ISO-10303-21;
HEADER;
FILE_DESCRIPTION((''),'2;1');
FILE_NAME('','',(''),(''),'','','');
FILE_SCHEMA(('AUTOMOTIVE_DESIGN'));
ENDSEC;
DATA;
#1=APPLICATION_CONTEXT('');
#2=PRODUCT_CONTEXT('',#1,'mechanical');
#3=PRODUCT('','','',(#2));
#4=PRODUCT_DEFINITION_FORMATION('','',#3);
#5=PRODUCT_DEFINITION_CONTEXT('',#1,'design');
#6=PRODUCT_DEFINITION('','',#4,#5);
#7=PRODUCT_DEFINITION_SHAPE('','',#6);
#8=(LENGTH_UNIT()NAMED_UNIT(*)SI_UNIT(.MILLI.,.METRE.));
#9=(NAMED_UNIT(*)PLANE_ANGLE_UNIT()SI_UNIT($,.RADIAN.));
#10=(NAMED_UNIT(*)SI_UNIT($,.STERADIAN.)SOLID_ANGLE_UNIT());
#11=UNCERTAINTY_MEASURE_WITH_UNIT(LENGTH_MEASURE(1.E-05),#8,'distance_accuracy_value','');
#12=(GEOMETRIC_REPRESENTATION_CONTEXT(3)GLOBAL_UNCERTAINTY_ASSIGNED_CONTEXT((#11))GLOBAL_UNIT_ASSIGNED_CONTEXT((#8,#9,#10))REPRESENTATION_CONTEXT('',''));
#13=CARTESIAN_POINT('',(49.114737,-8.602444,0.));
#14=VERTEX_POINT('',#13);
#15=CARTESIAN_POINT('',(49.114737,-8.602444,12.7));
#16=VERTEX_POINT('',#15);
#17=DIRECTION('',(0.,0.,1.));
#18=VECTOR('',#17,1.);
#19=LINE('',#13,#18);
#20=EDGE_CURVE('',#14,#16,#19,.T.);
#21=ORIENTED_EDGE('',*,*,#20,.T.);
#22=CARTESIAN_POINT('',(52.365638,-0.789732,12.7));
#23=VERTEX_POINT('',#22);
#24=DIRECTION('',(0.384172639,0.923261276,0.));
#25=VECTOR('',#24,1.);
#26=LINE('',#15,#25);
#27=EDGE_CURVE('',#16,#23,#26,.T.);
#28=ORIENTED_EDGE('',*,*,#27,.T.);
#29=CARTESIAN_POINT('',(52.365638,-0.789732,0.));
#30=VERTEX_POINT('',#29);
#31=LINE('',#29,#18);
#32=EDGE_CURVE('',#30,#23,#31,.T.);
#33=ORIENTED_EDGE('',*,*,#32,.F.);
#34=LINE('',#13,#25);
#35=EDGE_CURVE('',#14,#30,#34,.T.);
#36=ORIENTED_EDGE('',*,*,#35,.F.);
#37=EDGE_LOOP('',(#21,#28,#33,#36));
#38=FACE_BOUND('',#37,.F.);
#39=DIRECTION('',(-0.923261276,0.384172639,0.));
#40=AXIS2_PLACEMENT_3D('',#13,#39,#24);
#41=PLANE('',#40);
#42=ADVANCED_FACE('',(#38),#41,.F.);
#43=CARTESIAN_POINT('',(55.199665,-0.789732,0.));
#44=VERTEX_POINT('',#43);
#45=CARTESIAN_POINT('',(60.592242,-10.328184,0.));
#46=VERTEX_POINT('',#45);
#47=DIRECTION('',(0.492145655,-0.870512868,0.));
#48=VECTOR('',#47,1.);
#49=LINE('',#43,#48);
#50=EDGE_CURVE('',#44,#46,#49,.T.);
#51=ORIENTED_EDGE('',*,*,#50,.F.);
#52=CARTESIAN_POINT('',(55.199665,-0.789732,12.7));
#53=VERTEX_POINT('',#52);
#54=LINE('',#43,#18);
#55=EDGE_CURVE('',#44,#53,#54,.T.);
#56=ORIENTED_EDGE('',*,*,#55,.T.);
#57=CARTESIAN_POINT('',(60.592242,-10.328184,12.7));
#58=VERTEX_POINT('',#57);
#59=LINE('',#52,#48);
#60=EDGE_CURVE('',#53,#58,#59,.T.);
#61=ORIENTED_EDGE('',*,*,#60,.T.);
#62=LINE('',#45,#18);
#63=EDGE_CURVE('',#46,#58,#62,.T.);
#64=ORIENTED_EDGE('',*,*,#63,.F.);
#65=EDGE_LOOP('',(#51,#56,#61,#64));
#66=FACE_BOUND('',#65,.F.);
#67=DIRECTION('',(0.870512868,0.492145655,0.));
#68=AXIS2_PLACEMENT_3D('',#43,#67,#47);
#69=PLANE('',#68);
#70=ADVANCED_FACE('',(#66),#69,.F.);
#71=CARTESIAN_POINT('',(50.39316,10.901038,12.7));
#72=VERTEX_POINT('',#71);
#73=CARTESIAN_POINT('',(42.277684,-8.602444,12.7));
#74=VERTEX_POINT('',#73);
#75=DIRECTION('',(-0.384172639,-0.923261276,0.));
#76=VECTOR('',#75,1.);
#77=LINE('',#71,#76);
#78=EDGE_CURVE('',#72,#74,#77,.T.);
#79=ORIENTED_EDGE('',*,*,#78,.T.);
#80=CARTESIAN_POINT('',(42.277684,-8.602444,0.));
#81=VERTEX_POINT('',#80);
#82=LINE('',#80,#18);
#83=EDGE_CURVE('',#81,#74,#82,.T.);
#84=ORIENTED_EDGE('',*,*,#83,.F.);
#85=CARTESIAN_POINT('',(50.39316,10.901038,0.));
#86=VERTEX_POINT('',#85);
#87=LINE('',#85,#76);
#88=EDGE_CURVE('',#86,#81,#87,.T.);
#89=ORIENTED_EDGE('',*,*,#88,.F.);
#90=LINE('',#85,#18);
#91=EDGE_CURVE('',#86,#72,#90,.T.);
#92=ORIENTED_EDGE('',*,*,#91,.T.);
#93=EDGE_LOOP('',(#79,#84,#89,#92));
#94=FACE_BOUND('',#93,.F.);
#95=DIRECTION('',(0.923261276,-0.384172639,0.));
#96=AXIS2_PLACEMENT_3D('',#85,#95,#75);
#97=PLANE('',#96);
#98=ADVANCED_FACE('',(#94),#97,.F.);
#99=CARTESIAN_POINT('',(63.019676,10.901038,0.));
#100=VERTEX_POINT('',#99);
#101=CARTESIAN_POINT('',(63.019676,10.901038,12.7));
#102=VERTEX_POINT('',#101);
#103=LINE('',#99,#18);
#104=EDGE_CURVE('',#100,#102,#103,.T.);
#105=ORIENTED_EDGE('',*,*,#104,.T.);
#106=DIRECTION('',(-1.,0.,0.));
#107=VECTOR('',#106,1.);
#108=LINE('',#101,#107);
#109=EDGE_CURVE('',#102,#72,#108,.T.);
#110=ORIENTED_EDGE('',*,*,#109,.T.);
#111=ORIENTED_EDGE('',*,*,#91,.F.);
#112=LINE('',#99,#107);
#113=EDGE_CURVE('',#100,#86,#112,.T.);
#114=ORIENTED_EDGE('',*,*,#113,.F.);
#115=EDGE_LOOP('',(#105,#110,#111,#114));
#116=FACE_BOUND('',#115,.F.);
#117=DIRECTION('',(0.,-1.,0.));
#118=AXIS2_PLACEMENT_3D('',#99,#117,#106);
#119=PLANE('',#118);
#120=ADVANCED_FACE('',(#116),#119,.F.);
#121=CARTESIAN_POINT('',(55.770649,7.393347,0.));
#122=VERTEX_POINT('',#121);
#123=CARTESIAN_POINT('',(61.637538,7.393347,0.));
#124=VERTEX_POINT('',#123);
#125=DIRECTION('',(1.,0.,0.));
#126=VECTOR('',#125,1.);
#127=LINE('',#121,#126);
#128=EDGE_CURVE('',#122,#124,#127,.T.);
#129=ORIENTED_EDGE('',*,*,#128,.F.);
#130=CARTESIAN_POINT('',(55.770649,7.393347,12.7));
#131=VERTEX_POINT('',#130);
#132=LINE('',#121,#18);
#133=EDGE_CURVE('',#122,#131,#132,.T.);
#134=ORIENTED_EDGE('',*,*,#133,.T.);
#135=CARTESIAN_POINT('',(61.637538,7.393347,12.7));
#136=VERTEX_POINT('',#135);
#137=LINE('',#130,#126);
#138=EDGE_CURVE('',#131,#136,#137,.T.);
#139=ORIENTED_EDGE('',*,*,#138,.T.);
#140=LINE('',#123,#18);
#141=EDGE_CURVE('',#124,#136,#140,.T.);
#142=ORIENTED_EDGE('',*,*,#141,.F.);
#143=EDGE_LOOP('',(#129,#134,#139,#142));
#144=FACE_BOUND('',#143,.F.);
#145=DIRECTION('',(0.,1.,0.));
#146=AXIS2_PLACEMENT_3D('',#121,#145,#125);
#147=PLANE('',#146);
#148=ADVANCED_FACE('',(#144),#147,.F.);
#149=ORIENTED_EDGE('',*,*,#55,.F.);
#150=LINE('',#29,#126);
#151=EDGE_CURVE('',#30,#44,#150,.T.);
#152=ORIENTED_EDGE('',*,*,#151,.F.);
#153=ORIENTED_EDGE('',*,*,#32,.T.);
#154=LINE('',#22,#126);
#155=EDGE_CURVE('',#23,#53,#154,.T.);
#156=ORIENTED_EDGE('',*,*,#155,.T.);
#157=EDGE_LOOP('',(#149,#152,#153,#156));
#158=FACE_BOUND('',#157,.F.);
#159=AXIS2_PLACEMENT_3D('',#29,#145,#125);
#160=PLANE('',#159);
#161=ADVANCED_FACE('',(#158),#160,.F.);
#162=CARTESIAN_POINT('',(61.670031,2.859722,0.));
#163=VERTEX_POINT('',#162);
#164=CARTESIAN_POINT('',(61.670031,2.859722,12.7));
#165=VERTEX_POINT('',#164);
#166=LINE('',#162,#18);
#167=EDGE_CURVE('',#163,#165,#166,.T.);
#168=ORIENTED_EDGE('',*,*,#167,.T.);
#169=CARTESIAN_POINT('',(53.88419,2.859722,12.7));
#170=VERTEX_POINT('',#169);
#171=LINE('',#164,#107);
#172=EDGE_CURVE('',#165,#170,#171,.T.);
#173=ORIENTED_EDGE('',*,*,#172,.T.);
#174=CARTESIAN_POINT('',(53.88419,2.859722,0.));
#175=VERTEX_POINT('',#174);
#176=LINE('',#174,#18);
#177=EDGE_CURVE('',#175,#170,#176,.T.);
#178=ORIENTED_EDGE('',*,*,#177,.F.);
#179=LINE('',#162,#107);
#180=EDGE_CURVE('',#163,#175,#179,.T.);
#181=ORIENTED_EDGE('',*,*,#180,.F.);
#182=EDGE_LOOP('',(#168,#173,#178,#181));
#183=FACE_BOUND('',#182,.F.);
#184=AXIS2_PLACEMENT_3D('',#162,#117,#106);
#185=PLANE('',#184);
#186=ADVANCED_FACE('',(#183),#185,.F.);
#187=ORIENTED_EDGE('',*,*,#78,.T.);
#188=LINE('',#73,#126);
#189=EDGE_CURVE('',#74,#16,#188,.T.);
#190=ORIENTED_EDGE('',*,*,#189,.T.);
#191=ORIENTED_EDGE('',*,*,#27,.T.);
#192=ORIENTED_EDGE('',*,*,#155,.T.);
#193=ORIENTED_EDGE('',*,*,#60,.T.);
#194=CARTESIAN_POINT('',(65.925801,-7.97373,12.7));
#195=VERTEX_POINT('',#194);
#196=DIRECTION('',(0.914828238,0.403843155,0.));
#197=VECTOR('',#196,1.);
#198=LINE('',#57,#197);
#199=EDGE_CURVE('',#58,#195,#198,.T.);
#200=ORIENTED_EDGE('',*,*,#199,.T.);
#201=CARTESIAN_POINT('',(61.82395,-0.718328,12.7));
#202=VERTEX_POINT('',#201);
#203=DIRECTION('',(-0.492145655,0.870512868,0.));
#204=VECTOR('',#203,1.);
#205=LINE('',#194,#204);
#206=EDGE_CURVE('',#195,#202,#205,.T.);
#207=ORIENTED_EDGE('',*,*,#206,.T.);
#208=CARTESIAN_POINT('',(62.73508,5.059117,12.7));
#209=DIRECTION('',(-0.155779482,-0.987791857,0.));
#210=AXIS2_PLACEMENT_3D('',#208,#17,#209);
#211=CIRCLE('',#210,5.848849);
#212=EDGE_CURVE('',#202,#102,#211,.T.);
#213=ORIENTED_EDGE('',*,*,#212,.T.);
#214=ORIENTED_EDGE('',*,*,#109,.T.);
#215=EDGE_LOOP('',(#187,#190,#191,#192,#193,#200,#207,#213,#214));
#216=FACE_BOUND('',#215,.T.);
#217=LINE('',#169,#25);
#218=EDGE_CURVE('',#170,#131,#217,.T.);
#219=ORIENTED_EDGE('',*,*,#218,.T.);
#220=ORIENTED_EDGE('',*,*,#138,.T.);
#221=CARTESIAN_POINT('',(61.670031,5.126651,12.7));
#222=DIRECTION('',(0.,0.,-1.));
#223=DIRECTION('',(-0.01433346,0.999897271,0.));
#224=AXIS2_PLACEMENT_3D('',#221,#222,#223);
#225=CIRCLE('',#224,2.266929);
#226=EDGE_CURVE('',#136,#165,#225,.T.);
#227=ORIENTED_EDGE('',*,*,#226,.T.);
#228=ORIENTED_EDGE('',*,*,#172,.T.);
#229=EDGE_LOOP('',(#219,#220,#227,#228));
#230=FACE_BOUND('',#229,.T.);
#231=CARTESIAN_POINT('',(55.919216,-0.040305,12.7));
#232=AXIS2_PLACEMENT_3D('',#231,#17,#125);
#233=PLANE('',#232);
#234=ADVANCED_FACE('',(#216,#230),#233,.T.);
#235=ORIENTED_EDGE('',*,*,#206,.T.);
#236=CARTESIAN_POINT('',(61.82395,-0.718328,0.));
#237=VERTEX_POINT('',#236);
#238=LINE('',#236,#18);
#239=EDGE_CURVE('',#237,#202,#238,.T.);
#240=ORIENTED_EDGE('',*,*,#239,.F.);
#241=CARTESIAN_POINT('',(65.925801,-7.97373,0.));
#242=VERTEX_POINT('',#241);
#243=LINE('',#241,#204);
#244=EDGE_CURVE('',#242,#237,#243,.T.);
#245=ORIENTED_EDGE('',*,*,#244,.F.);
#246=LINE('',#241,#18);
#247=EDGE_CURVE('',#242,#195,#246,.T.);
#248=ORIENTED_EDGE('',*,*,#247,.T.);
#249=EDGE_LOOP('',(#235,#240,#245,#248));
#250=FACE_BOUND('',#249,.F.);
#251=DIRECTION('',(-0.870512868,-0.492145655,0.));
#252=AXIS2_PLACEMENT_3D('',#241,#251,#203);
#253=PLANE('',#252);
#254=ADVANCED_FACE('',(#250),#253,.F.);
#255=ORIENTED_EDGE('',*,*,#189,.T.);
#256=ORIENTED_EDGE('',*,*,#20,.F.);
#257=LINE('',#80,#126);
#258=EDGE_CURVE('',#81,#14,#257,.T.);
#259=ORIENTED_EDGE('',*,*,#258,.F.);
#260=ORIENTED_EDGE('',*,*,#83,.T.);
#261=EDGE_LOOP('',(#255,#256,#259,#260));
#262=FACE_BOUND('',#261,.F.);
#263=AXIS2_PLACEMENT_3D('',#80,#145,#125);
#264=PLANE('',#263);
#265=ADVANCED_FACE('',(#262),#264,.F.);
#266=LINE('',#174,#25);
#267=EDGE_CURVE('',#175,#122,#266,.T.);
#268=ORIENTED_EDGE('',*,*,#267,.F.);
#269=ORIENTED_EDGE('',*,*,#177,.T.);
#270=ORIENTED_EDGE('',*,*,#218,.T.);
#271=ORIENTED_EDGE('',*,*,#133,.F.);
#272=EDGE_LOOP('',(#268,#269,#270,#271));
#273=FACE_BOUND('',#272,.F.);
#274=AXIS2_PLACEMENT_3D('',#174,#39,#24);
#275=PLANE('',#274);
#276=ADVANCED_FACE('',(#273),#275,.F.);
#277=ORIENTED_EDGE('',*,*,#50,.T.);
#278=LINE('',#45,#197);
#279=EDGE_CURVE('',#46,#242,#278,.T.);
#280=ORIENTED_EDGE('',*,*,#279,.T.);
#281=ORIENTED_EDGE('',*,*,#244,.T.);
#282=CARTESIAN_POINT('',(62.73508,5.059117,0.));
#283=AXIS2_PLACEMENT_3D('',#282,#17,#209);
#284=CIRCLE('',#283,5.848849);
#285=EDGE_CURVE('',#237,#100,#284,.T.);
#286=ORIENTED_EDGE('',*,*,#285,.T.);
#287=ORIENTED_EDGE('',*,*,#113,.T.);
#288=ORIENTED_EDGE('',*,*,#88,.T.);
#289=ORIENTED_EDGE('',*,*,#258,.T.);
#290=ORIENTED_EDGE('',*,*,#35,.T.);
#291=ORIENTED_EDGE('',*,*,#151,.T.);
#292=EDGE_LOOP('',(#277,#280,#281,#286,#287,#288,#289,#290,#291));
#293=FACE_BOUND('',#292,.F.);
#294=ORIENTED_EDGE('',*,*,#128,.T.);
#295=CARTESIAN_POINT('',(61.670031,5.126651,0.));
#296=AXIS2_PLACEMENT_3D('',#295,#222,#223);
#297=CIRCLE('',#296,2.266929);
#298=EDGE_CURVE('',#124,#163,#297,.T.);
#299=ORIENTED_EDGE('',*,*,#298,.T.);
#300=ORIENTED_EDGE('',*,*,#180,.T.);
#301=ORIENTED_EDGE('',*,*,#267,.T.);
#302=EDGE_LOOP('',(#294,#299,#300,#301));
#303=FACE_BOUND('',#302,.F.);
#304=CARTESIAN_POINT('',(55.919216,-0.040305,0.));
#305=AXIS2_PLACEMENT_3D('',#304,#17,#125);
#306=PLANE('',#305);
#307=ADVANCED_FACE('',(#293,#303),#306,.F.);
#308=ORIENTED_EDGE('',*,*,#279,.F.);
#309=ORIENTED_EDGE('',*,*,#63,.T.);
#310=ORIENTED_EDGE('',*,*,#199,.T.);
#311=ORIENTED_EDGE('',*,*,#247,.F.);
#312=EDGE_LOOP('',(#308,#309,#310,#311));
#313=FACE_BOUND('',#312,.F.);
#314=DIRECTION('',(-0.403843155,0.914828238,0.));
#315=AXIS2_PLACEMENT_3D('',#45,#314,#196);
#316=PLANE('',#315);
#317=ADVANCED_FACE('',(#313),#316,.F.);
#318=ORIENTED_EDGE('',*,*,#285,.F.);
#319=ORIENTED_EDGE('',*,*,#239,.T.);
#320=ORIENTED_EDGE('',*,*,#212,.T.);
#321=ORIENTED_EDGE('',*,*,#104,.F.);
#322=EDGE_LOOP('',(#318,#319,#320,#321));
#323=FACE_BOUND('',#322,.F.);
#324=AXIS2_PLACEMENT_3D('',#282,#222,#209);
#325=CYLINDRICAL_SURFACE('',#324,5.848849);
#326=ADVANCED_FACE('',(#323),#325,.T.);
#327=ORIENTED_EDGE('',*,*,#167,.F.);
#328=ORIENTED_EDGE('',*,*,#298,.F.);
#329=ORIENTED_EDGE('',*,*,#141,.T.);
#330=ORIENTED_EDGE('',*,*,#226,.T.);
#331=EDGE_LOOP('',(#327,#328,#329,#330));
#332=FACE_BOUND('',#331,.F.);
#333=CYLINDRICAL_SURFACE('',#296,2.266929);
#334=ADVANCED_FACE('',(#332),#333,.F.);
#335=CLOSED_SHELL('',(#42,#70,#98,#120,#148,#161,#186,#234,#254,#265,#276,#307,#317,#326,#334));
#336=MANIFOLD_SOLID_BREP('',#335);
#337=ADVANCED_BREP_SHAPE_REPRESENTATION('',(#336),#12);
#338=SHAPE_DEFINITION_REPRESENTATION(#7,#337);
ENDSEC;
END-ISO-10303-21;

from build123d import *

# Parameters (mm, degrees)
F1_DEPTH = 12.7


# Not quite as in the source:
# - a feature names something its author has since deleted; it is built from what else it names


with BuildPart() as f1:
    # F0 (on Top) → F1 (new body)
    with BuildSketch(Plane.XY):
        with BuildLine():
            Line((63.0196762211, 10.9010377465), (50.3931596336, 10.9010377465))
            Line((50.3931596336, 10.9010377465), (42.2776843256, -8.6024441122))
            Line((42.2776843256, -8.6024441122), (49.1147374354, -8.6024441122))
            Line((49.1147374354, -8.6024441122), (52.3656376201, -0.7897319333))
            Line((52.3656376201, -0.7897319333), (55.199665187, -0.7897319333))
            Line((55.199665187, -0.7897319333), (60.5922424733, -10.3281843676))
            Line((60.5922424733, -10.3281843676), (65.9258010509, -7.9737302361))
            Line((65.9258010509, -7.9737302361), (61.8239495523, -0.7183283504))
            ThreePointArc((61.8239495523, -0.7183283504), (68.5532030557, 4.4603851012), (63.0196762211, 10.9010377465))
        make_face()
        with BuildLine():
            Line((53.8841895381, 2.8597215688), (55.7706488767, 7.3933470303))
            Line((55.7706488767, 7.3933470303), (61.637538461, 7.3933470303))
            ThreePointArc((61.637538461, 7.3933470303), (63.9369023486, 5.1428976256), (61.6700313985, 2.8597215688))
            Line((61.6700313985, 2.8597215688), (53.8841895381, 2.8597215688))
        make_face(mode=Mode.SUBTRACT)
    extrude(amount=F1_DEPTH)


solid = f1.part
